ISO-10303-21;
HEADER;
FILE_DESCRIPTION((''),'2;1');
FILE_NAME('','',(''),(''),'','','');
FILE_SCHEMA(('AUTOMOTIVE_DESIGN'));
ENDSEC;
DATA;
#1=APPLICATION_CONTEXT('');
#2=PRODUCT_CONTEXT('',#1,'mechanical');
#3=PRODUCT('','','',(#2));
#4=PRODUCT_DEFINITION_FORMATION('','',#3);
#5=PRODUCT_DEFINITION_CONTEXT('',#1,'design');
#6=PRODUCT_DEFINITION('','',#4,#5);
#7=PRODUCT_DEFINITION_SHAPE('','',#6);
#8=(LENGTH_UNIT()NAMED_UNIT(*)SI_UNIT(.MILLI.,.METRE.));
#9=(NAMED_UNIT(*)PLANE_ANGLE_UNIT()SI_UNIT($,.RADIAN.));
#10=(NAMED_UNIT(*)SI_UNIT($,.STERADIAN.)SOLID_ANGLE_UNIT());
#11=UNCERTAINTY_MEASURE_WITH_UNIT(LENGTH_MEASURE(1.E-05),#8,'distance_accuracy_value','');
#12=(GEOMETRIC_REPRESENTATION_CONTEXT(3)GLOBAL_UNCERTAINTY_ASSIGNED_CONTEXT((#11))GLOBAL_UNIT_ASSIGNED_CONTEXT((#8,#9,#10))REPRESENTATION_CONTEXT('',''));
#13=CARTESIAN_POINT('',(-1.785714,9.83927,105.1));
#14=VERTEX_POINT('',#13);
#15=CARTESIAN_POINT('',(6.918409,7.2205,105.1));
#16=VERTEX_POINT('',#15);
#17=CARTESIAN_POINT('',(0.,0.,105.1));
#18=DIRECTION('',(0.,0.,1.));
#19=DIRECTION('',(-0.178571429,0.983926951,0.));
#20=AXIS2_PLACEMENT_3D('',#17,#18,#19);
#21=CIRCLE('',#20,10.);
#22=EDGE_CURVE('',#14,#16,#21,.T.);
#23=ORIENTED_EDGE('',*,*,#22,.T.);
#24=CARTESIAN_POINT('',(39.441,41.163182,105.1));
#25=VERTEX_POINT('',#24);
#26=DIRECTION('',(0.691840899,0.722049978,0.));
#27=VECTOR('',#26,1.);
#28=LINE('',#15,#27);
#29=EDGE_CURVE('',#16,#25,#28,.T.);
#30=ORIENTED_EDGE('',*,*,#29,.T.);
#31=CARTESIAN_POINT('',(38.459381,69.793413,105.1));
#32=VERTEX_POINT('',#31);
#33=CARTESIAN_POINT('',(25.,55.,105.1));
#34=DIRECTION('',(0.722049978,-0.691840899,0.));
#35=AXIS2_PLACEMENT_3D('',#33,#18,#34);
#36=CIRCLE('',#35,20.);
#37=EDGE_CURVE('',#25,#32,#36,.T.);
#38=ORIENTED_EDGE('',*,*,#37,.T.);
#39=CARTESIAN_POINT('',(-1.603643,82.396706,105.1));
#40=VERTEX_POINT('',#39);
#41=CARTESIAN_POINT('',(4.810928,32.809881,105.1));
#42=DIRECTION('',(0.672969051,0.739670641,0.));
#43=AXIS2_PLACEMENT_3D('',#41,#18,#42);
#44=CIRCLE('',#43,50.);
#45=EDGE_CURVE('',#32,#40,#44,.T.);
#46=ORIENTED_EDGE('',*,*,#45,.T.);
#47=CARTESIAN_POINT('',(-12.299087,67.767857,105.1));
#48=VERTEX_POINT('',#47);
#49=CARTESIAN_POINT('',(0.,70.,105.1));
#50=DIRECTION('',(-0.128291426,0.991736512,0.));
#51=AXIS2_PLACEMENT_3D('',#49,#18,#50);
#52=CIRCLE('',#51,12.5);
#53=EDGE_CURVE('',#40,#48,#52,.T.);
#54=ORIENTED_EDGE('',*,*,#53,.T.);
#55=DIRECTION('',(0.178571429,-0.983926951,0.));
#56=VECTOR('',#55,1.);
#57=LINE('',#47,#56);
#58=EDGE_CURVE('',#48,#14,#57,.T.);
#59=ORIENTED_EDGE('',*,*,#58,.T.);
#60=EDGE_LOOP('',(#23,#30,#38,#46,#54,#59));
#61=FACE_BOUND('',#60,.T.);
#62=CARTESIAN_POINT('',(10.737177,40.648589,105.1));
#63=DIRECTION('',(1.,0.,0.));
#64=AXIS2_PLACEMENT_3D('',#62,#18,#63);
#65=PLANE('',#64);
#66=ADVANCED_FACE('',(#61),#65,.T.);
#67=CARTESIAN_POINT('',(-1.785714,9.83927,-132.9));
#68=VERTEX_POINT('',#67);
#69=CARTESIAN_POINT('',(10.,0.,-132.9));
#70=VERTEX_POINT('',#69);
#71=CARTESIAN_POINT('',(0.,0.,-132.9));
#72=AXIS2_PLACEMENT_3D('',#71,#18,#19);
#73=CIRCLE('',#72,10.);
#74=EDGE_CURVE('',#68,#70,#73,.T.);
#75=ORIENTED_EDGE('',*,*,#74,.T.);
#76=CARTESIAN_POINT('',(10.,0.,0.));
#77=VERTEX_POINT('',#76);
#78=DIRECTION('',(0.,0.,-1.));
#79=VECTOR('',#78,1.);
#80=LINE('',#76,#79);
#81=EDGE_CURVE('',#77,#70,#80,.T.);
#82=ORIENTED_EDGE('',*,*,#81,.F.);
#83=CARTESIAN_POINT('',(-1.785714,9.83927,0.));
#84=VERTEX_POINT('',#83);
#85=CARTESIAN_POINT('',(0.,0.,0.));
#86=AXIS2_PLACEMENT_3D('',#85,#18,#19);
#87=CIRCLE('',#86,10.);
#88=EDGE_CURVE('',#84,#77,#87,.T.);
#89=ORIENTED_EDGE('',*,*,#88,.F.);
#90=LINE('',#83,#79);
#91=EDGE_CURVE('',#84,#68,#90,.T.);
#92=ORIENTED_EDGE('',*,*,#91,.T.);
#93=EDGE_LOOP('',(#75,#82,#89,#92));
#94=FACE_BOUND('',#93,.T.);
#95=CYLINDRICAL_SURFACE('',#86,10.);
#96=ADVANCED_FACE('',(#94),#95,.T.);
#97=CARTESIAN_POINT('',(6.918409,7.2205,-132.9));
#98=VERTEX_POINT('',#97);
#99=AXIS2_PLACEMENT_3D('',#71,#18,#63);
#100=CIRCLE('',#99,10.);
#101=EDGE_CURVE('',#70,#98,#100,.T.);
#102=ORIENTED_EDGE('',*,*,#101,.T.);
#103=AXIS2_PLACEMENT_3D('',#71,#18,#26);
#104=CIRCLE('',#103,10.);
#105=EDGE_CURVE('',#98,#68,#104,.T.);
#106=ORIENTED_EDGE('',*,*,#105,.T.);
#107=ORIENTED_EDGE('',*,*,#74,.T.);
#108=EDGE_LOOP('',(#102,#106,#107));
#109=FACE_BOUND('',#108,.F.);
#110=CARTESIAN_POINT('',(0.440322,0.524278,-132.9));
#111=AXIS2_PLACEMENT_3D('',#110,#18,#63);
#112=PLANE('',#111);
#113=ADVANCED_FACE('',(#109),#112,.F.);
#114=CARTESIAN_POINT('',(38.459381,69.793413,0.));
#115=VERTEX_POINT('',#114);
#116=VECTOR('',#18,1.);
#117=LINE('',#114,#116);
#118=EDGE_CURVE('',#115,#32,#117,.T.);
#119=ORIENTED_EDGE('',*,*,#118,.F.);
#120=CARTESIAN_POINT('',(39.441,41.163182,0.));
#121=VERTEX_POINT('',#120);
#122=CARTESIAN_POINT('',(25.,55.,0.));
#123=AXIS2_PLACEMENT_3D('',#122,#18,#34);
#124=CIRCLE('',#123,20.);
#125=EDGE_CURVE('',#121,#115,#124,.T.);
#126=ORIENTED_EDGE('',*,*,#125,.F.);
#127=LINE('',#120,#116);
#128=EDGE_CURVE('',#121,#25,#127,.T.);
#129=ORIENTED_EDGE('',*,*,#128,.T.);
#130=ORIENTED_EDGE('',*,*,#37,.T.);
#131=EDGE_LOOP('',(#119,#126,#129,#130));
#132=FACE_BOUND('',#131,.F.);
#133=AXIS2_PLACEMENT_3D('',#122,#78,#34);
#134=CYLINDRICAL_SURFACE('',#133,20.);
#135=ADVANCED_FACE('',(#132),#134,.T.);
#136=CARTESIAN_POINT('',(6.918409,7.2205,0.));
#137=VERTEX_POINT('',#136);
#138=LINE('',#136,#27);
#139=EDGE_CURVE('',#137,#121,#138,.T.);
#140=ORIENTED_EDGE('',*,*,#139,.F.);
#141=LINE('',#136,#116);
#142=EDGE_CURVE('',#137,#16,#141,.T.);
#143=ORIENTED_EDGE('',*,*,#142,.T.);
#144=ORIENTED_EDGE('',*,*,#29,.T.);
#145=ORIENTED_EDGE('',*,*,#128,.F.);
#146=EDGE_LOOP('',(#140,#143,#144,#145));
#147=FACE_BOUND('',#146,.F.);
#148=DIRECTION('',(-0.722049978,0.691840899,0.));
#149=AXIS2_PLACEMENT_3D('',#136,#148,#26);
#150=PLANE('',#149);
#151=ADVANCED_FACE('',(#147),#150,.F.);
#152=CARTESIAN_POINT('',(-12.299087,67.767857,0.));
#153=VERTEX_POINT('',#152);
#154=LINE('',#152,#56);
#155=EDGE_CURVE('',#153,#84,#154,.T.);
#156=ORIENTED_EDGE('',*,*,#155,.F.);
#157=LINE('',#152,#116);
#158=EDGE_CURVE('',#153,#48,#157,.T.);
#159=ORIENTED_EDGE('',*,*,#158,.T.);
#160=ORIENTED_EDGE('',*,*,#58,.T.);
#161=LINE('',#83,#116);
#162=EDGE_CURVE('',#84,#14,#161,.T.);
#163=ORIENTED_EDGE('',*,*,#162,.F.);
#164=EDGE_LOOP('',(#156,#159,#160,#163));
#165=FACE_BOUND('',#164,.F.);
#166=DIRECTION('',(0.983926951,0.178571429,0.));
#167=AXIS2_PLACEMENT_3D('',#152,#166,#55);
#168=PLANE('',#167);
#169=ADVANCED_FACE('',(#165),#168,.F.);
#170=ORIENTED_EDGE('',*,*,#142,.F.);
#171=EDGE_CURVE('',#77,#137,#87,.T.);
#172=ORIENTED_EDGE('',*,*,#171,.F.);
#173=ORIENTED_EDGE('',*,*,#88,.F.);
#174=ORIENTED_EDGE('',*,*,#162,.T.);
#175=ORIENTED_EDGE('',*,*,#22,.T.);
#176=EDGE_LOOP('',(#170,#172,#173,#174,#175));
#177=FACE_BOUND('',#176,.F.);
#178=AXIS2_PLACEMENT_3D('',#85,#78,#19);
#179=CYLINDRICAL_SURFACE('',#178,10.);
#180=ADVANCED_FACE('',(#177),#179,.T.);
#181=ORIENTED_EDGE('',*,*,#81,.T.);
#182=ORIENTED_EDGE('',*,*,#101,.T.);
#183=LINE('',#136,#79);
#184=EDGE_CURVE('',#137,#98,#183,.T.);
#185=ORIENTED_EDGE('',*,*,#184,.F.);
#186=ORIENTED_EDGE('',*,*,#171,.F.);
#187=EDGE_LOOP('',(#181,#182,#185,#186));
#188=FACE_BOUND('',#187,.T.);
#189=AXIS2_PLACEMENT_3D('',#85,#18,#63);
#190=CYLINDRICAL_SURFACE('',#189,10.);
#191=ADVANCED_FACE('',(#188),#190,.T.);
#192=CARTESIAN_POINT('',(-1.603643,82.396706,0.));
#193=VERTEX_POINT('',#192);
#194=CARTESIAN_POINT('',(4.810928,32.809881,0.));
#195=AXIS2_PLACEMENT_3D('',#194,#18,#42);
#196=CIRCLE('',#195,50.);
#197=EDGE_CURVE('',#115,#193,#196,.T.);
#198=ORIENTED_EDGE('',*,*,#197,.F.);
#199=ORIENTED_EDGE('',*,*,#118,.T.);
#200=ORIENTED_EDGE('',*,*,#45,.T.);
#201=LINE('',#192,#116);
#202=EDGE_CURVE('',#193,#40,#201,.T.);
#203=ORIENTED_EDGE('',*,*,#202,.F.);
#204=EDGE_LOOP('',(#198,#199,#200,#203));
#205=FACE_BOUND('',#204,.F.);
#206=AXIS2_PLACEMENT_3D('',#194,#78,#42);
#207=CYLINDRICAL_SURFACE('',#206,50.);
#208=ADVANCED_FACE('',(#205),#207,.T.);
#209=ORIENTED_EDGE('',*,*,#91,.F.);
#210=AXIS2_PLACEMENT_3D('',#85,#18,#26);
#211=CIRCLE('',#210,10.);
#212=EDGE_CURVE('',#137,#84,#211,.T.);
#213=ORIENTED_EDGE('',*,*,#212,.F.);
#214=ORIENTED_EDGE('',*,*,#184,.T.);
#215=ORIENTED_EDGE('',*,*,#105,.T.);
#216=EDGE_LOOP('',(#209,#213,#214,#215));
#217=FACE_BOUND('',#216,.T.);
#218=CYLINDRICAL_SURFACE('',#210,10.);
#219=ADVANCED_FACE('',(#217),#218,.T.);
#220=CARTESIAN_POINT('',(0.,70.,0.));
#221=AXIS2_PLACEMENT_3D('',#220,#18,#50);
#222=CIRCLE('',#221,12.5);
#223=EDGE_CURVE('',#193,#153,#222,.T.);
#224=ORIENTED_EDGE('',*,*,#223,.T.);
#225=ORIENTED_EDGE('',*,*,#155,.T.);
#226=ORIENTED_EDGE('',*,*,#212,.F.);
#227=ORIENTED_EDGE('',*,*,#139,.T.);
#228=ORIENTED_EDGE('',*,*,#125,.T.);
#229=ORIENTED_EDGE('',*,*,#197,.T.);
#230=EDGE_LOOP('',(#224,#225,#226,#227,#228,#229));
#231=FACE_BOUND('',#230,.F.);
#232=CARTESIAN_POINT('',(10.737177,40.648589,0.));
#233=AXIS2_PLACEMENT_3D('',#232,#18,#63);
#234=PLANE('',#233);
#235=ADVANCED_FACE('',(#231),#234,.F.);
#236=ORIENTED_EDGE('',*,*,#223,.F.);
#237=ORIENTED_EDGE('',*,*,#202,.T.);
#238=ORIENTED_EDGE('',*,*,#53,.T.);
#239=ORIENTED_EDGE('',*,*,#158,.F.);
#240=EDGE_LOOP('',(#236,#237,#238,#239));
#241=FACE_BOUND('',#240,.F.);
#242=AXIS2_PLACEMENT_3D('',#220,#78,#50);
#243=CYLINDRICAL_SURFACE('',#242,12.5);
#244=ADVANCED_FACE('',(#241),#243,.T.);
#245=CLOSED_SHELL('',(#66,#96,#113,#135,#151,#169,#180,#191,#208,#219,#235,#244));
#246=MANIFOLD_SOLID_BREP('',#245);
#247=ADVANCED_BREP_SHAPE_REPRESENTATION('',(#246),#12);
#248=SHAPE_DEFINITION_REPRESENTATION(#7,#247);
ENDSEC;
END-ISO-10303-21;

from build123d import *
from build123d import SkipClean  # not in build123d's __all__

# Parameters (mm, degrees)
F1_DEPTH = 105.1
F3_DEPTH = 132.9


with BuildPart() as f1:
    # F0 (on Top) → F1 (new body)
    with BuildSketch(Plane.XY):
        with BuildLine():
            Line((-12.2990868875, 67.7678571429), (-1.7857142857, 9.83926951))
            ThreePointArc((-1.7857142857, 9.83926951), (-2.8810809532, -9.5759789338), (6.9184089901, 7.2204997781))
            Line((6.9184089901, 7.2204997781), (39.4409995563, 41.1631820199))
            ThreePointArc((39.4409995563, 41.1631820199), (44.9882549975, 55.6853190171), (38.4593810195, 69.7934128102))
            ThreePointArc((38.4593810195, 69.7934128102), (19.8153219741, 80.5054589403), (-1.6036428236, 82.3967064051))
            ThreePointArc((-1.6036428236, 82.3967064051), (-10.0907027029, 77.3775144162), (-12.2990868875, 67.7678571429))
        make_face()
    extrude(amount=F1_DEPTH)

    # F2 (on face) → F3 (join)
    with BuildSketch(Plane.XY):
        with BuildLine():
            ThreePointArc((-1.7857142857, 9.83926951), (-6.4086994446, -7.6764947358), (10, 0))
            ThreePointArc((10, 0), (9.197393378, 3.9252968104), (6.9184089901, 7.2204997781))
            ThreePointArc((6.9184089901, 7.2204997781), (2.8810809532, 9.5759789338), (-1.7857142857, 9.83926951))
        make_face()
    with SkipClean():  # cleaning this boolean's faces spoils the solid; the shape is the same uncleaned
        extrude(amount=-F3_DEPTH)


solid = f1.part
